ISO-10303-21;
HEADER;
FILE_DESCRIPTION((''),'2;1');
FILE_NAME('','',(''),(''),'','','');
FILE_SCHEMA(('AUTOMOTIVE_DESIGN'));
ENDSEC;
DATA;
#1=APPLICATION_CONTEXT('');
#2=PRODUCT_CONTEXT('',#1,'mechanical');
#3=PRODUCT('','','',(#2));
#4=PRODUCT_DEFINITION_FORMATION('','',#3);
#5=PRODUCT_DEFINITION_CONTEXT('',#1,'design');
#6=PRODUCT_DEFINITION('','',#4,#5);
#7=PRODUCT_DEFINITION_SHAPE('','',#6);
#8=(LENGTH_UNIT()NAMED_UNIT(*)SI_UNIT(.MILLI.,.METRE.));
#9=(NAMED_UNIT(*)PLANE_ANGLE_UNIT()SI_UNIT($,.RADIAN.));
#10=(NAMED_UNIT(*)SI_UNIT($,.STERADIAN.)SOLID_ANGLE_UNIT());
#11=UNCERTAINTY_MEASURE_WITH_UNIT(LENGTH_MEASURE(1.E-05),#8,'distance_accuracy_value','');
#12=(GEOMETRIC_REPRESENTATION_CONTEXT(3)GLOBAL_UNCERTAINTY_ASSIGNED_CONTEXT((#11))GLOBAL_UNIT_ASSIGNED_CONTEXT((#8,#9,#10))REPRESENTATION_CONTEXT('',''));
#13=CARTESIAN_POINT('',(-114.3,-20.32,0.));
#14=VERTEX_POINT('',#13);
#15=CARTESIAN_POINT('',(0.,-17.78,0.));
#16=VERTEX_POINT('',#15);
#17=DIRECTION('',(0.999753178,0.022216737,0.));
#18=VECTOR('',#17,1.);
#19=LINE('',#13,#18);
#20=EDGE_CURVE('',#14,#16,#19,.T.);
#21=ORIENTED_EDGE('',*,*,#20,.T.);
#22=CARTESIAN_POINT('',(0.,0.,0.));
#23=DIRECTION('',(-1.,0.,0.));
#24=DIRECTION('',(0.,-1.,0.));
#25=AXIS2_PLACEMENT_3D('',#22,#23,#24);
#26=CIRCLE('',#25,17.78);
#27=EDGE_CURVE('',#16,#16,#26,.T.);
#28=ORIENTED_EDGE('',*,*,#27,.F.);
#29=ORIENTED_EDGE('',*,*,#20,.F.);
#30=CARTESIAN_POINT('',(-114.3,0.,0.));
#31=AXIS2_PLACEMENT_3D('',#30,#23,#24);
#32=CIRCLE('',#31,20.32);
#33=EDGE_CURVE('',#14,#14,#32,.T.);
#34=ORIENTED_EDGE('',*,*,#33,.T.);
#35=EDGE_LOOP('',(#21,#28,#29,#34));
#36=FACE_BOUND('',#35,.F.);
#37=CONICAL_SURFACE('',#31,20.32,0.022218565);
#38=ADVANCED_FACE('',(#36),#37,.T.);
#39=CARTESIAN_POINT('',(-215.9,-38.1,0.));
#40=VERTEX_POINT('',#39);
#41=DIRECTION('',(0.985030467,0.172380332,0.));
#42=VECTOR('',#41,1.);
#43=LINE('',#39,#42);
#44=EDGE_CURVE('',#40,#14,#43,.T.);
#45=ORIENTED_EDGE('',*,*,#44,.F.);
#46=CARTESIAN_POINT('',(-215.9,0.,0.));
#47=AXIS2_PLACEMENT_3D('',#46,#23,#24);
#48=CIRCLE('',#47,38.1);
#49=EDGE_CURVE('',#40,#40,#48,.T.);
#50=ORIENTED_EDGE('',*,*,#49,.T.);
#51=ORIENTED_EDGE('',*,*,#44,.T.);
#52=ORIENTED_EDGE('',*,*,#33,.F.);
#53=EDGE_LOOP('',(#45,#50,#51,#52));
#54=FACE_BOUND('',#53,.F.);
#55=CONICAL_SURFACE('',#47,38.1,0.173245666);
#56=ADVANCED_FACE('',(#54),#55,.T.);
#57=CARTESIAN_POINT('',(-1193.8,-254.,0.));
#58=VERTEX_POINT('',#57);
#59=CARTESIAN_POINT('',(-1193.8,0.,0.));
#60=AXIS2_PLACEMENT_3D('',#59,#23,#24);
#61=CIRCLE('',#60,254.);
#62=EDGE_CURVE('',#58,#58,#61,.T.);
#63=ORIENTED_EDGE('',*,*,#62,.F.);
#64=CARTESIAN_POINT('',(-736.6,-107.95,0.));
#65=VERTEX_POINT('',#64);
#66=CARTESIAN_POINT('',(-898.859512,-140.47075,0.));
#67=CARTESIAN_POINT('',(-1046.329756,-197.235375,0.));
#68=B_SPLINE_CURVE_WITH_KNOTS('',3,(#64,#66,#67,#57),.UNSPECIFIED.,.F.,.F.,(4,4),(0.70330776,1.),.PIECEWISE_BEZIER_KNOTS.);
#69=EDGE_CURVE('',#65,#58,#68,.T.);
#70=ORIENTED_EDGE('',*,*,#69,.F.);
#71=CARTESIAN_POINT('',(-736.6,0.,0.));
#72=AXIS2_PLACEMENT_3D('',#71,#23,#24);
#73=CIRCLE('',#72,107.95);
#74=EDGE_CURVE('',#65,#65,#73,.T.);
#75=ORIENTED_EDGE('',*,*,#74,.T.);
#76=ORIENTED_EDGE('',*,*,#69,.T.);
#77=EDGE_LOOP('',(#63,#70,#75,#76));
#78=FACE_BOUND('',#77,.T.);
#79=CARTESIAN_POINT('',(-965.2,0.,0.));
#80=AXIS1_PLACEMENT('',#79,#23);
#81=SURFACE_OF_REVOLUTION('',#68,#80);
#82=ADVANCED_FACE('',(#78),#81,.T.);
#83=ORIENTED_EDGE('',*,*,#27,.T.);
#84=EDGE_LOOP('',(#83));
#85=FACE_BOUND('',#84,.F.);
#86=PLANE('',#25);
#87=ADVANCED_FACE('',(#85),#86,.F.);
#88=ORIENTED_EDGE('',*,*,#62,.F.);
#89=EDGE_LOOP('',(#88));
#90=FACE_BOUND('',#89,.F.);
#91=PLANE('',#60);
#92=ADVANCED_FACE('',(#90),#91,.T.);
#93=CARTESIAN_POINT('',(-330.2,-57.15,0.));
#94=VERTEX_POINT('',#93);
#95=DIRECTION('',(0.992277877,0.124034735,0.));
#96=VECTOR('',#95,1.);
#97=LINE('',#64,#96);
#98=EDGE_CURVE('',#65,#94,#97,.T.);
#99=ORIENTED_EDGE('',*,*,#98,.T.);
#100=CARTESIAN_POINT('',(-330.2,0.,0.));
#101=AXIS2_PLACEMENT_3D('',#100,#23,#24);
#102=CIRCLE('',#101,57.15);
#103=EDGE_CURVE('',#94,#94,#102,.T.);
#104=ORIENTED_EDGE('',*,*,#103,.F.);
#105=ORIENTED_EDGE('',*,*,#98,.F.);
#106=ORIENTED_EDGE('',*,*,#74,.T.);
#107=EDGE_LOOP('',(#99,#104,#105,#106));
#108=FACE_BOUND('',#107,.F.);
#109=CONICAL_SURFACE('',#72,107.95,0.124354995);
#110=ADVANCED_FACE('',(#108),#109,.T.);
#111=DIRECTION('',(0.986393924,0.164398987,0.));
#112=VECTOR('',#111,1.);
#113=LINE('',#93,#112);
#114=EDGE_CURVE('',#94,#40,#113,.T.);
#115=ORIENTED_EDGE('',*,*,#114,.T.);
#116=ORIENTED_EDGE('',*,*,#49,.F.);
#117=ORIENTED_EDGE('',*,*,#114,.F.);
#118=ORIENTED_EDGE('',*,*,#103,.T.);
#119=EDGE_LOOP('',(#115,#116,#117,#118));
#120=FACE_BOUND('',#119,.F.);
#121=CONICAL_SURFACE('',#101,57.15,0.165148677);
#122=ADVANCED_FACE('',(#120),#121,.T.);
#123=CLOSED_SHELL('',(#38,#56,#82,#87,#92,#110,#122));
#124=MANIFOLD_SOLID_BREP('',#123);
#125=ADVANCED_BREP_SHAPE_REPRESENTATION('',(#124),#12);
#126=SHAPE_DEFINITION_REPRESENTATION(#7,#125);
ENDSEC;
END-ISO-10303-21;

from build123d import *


with BuildPart() as f1:
    # F0 (on Top) → F1 (revolve)
    with BuildSketch(Plane.XY):
        with BuildLine():
            add(Edge.make_bspline(
                [(0, 0), (-38.4107541448, -6.923547728), (-76.8215082895, -13.847095456), (-114.3, -20.32)],
                knots=[0, 0, 0, 0, 0.145916612, 0.145916612, 0.145916612, 0.145916612], degree=3))
            Line((0, 0), (-114.3, 0))
            Line((-114.3, 0), (-114.3, -20.32))
        make_face()
        with BuildLine():
            Line((0, -17.78), (0, 0))
            add(Edge.make_bspline(
                [(0, 0), (-38.4107541448, -6.923547728), (-76.8215082895, -13.847095456), (-114.3, -20.32)],
                knots=[0, 0, 0, 0, 0.145916612, 0.145916612, 0.145916612, 0.145916612], degree=3))
            Line((-114.3, -20.32), (0, -17.78))
        make_face()
        with BuildLine():
            Line((-114.3, -20.32), (-114.3, 0))
            Line((-114.3, 0), (-215.9, 0))
            Line((-215.9, 0), (-215.9, -38.1))
            add(Edge.make_bspline(
                [(-114.3, -20.32), (-149.6266665218, -26.4212631464), (-184.1250490049, -32.1221448737), (-215.9, -38.1)],
                knots=[0.145916612, 0.145916612, 0.145916612, 0.145916612, 0.2834554311, 0.2834554311, 0.2834554311, 0.2834554311], degree=3))
        make_face()
        with BuildLine():
            Line((-215.9, -38.1), (-114.3, -20.32))
            add(Edge.make_bspline(
                [(-114.3, -20.32), (-149.6266665218, -26.4212631464), (-184.1250490049, -32.1221448737), (-215.9, -38.1)],
                knots=[0.145916612, 0.145916612, 0.145916612, 0.145916612, 0.2834554311, 0.2834554311, 0.2834554311, 0.2834554311], degree=3))
        make_face()
        Polygon((-215.9, -38.1), (-215.9, 0), (-330.2, 0), (-330.2, -57.15), align=None)
        with BuildLine():
            Line((-330.2, -57.15), (-330.2, 0))
            Line((-330.2, 0), (-736.6, 0))
            Line((-736.6, 0), (-736.6, -107.95))
            add(Edge.make_bspline(
                [(-330.2, -57.15), (-424.2035468422, -68.5554317066), (-586.7118007059, -77.9087616289), (-736.6, -107.95)],
                knots=[0.4292365201, 0.4292365201, 0.4292365201, 0.4292365201, 0.7033077599, 0.7033077599, 0.7033077599, 0.7033077599], degree=3))
        make_face()
        with BuildLine():
            Line((-736.6, -107.95), (-330.2, -57.15))
            add(Edge.make_bspline(
                [(-330.2, -57.15), (-424.2035468422, -68.5554317066), (-586.7118007059, -77.9087616289), (-736.6, -107.95)],
                knots=[0.4292365201, 0.4292365201, 0.4292365201, 0.4292365201, 0.7033077599, 0.7033077599, 0.7033077599, 0.7033077599], degree=3))
        make_face()
        with BuildLine():
            Line((-736.6, -107.95), (-736.6, 0))
            Line((-736.6, 0), (-1193.8, 0))
            Line((-1193.8, 0), (-1193.8, -254))
            add(Edge.make_bspline(
                [(-736.6, -107.95), (-898.8595120127, -140.4707501412), (-1046.3297560064, -197.2353750706), (-1193.8, -254)],
                knots=[0.7033077599, 0.7033077599, 0.7033077599, 0.7033077599, 1, 1, 1, 1], degree=3))
        make_face()
    revolve(axis=Axis((-965.2, 0, 0), (-1, 0, 0)))


solid = f1.part
